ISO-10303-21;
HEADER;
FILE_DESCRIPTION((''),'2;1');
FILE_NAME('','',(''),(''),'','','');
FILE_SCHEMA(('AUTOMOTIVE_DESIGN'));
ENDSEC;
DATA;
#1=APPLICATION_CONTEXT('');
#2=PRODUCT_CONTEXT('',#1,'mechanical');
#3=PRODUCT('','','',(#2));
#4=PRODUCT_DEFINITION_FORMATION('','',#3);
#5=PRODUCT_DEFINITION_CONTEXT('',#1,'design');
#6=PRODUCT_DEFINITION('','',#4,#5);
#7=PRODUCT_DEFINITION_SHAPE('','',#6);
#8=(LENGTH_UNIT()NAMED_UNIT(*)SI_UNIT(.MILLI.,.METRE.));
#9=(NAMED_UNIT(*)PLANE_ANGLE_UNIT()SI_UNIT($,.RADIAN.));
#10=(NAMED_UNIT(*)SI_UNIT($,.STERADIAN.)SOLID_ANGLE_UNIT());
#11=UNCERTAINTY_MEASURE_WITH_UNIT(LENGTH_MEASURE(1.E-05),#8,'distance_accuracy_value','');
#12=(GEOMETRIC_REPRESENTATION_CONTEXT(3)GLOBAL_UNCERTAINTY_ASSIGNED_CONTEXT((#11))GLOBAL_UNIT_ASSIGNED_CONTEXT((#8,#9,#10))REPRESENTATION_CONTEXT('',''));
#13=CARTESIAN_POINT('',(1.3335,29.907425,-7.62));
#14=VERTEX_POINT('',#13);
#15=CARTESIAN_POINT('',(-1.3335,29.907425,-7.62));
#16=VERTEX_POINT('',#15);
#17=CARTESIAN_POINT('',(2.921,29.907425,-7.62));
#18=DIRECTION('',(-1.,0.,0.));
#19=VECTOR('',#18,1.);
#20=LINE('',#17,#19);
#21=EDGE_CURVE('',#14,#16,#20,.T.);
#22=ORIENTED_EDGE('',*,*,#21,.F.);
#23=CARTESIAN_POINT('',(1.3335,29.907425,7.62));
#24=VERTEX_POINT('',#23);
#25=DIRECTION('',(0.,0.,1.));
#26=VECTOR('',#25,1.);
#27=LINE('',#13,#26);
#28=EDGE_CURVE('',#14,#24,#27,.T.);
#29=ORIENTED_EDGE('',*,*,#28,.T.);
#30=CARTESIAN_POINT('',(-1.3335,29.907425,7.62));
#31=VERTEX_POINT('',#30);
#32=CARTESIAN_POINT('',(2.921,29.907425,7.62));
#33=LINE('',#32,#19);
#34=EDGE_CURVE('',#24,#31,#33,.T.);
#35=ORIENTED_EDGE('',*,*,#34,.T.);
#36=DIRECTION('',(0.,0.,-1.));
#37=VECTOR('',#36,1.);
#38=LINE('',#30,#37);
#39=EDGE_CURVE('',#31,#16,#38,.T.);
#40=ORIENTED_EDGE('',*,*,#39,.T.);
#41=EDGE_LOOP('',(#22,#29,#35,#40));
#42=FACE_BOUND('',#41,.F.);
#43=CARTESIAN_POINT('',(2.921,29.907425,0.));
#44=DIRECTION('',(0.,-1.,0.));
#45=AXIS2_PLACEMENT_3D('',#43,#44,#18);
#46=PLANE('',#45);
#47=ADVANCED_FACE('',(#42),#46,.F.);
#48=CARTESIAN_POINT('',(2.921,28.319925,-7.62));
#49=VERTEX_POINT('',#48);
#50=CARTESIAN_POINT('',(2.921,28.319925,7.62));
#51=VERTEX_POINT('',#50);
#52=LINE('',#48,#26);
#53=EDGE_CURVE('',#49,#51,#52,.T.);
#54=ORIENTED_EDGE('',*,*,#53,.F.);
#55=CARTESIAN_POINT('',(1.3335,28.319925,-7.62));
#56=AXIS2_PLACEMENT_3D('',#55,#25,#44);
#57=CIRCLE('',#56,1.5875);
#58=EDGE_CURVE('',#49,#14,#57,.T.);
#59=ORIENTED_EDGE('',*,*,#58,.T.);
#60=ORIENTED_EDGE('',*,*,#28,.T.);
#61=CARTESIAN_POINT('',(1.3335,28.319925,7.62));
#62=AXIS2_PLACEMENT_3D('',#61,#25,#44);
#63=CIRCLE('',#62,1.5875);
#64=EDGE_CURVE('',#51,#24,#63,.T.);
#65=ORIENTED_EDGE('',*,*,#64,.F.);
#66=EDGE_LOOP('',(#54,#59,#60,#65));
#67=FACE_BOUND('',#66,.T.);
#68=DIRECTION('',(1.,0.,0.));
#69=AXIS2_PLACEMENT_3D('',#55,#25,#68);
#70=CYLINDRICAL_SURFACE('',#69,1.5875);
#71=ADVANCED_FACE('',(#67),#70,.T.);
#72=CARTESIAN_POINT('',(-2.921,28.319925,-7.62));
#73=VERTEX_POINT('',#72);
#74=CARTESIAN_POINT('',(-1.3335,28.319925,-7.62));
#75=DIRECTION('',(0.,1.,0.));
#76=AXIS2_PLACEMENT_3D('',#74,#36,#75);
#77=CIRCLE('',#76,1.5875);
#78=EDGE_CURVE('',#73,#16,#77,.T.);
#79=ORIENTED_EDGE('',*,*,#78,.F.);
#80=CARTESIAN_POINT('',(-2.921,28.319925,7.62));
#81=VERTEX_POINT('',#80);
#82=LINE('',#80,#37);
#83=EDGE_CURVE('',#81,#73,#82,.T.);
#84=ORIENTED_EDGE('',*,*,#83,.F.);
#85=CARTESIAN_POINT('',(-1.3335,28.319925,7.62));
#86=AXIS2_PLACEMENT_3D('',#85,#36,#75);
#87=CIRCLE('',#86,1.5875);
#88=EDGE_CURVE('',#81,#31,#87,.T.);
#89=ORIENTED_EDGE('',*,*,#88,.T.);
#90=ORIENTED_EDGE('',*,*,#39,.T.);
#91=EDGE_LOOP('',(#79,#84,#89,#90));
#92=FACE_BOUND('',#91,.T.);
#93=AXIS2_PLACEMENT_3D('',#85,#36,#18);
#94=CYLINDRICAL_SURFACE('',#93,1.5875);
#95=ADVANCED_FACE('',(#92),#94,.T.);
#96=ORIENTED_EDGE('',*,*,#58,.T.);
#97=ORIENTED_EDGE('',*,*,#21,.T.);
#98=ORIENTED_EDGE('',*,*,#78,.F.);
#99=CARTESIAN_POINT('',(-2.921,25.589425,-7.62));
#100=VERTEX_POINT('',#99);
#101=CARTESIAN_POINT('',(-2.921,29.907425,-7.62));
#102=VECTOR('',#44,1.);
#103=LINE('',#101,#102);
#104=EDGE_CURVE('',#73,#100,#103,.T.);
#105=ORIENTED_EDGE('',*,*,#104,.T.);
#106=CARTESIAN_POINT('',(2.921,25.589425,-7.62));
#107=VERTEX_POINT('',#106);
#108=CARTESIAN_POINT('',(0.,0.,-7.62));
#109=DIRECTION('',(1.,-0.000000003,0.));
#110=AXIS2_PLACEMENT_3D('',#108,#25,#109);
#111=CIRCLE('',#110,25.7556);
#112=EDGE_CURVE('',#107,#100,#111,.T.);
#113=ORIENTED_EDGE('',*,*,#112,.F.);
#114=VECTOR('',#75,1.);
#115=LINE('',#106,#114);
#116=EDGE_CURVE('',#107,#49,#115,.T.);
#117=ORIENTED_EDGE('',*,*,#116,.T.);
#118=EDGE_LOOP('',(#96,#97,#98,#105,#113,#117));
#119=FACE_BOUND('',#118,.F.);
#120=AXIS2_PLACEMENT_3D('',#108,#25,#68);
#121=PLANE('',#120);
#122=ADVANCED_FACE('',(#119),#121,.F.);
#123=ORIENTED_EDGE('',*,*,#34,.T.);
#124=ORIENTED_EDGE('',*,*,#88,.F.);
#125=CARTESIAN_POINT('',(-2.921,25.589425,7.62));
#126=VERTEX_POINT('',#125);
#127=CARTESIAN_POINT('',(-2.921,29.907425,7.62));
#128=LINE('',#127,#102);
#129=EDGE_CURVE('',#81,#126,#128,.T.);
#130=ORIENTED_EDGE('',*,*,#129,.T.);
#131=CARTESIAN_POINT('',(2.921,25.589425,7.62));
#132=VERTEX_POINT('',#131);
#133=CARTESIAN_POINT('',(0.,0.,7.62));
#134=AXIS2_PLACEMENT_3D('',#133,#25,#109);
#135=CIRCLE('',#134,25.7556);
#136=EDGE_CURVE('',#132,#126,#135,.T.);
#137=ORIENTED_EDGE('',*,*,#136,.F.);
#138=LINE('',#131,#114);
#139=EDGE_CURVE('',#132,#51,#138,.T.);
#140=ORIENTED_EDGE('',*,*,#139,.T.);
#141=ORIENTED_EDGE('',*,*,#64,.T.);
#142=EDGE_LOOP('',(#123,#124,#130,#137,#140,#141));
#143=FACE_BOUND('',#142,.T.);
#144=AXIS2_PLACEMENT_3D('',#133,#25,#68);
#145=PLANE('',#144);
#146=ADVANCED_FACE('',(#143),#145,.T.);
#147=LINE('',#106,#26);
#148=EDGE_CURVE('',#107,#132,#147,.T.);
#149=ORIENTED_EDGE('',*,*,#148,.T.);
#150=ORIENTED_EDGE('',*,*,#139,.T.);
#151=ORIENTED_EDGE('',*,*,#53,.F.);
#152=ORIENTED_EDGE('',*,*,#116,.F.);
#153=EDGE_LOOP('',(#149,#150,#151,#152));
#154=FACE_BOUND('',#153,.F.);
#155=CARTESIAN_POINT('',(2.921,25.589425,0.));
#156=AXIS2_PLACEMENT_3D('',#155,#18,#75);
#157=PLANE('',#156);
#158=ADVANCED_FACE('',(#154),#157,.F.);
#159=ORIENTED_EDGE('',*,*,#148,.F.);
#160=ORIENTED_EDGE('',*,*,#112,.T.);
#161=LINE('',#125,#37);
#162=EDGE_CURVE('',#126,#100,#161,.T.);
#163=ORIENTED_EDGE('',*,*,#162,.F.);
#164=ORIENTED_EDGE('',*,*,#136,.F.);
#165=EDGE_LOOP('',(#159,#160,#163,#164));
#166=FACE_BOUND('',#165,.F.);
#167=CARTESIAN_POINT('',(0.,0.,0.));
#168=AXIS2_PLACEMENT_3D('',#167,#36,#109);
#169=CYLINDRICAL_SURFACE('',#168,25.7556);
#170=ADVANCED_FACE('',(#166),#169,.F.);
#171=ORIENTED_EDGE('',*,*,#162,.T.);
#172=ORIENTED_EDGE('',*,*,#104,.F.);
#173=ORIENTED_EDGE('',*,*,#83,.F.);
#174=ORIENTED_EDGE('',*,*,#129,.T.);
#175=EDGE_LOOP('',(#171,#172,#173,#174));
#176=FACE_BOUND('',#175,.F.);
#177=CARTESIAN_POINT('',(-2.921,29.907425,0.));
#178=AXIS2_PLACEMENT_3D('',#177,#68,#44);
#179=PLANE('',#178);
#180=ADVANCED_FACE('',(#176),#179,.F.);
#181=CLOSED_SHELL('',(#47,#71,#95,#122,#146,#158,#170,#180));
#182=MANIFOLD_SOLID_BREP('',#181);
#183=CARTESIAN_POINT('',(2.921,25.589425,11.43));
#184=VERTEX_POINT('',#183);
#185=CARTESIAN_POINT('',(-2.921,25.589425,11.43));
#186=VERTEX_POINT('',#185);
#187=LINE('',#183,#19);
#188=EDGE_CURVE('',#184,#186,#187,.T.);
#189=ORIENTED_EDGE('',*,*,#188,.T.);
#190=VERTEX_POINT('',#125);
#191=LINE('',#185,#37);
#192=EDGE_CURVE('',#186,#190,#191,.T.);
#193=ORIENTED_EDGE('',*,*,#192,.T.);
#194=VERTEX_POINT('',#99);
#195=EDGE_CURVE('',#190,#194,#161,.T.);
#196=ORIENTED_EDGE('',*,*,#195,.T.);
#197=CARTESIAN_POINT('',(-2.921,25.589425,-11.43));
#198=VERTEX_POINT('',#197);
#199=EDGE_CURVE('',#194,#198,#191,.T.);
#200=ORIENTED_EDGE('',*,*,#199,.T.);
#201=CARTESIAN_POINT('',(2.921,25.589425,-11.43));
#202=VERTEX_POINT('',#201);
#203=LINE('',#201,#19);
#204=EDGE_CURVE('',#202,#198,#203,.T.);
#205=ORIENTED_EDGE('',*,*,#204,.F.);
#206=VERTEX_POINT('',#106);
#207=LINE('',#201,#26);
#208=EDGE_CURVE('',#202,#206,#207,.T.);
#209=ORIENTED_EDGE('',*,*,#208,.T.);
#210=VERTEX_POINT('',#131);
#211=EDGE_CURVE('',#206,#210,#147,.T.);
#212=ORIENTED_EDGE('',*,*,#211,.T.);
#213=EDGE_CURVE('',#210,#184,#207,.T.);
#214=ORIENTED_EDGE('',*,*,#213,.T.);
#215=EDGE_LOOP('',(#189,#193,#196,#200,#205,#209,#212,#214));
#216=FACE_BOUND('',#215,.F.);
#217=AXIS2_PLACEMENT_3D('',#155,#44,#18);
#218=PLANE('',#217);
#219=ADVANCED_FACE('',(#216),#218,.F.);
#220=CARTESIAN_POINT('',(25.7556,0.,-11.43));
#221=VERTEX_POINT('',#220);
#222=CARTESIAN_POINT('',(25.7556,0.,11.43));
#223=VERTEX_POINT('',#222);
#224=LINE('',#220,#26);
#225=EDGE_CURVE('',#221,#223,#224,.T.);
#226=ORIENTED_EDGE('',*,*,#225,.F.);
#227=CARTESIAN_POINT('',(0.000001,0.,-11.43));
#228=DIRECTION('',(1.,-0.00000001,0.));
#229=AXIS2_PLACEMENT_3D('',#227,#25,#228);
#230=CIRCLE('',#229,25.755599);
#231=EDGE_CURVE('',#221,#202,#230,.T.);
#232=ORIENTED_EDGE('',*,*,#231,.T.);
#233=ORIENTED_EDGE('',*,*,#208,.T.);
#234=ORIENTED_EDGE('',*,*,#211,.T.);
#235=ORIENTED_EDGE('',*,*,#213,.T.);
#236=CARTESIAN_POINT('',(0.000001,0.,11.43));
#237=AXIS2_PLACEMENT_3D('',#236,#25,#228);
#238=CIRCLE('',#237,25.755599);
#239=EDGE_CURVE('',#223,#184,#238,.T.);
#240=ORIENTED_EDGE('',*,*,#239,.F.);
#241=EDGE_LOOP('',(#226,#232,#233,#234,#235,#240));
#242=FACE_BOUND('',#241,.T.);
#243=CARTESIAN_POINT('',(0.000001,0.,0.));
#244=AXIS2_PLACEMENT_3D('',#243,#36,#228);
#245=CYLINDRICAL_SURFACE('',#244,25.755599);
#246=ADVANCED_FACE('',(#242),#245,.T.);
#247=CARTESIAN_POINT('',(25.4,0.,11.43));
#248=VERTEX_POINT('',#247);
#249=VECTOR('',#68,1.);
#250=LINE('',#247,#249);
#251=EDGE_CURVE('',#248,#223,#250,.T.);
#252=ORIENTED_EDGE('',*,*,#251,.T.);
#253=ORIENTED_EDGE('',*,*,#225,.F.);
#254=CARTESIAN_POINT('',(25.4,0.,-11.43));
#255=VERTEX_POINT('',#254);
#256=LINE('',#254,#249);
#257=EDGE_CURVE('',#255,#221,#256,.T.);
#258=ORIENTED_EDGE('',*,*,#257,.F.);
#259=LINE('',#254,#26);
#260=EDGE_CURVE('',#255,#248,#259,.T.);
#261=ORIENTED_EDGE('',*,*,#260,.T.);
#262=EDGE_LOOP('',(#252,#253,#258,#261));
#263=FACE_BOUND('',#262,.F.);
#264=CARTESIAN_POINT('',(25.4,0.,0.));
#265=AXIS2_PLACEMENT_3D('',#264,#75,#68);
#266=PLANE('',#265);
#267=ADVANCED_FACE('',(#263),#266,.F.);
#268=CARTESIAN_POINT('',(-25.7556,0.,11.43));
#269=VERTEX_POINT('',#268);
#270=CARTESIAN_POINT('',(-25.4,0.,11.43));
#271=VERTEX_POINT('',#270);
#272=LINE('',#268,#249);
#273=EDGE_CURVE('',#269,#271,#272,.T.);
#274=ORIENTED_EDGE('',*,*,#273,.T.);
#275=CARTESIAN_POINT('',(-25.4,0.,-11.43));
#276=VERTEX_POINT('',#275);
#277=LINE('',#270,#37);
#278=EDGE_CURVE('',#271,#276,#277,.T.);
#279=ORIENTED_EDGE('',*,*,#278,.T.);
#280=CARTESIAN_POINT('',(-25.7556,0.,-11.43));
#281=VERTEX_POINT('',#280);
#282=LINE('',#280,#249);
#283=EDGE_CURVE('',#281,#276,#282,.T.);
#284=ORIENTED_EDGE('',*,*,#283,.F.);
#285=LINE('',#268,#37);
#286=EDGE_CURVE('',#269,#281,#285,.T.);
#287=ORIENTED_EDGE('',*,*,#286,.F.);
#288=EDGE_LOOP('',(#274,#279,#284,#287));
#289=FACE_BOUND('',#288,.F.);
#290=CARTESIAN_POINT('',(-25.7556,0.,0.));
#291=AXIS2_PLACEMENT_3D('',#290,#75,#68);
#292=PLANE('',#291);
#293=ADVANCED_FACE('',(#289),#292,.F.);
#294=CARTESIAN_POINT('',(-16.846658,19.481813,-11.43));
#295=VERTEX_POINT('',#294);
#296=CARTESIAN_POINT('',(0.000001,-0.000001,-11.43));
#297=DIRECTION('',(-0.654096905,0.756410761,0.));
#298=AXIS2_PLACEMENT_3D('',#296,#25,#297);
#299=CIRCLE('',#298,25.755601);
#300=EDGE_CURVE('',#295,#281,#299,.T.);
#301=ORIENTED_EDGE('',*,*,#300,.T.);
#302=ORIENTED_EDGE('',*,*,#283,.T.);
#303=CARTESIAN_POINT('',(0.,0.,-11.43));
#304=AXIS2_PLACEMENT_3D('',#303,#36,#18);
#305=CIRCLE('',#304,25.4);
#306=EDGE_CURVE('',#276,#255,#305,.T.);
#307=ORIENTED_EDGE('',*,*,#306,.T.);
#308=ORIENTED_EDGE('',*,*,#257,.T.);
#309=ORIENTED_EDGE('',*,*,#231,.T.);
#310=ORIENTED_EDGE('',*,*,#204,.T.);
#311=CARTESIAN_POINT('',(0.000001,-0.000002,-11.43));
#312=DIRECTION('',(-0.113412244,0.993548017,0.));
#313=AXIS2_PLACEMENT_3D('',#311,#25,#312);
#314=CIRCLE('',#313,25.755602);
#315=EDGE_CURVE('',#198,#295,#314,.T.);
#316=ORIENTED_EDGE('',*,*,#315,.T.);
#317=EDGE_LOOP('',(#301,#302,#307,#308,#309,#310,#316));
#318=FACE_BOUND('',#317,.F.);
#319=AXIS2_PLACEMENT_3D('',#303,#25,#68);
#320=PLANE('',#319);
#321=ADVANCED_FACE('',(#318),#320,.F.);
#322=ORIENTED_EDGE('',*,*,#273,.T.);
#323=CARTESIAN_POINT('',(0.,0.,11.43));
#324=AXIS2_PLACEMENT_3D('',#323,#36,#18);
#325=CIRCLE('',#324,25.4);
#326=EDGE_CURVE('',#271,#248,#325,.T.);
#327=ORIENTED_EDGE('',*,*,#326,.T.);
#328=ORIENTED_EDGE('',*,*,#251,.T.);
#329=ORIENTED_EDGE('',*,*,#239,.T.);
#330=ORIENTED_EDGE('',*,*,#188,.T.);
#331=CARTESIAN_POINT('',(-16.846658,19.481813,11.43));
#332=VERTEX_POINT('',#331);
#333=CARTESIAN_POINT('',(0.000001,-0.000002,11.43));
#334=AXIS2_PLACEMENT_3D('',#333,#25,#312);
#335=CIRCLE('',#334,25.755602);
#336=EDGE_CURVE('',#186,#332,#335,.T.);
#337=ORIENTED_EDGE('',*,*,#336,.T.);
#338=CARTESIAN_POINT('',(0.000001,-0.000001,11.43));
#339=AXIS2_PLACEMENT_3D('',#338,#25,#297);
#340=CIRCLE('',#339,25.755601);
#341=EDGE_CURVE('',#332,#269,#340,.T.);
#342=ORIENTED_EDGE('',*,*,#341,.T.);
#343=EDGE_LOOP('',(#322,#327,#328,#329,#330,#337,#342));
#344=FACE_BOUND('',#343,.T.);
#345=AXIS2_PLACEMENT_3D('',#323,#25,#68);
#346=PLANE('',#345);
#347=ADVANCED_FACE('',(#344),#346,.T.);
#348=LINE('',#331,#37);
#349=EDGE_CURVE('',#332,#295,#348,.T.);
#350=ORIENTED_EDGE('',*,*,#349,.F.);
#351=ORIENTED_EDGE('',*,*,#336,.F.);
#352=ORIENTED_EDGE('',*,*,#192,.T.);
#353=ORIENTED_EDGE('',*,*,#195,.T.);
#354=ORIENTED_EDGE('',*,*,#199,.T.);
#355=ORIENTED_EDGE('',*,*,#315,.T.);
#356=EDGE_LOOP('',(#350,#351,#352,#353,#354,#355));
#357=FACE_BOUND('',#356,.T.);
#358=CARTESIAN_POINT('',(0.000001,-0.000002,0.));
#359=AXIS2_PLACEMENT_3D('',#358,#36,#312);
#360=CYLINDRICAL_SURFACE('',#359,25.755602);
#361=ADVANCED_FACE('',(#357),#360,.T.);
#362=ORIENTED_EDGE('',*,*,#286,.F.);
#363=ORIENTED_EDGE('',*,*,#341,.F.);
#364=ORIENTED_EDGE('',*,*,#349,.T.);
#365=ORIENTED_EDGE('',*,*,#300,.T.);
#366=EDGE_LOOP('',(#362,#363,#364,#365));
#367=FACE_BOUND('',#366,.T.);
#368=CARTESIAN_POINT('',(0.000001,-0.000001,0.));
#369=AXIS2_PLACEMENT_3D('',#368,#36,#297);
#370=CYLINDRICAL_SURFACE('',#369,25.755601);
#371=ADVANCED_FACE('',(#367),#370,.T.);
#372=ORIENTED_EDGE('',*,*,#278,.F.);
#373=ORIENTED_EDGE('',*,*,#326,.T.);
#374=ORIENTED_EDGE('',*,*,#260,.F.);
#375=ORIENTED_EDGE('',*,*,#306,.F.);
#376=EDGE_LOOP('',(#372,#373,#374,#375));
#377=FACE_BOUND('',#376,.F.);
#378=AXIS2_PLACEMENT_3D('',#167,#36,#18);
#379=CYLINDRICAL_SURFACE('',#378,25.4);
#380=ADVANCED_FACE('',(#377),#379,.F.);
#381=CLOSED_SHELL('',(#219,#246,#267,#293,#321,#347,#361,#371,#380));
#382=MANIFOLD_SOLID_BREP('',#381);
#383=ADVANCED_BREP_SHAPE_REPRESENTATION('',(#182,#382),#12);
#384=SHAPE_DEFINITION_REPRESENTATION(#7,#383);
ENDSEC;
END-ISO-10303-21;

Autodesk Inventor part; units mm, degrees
ref_plane "YZ Plane" through (0, 0, 0) normal (1, 0, 0) x (0, 1, 0)
ref_plane "XZ Plane" through (0, 0, 0) normal (0, 1, 0) x (-1, 0, 0)
ref_plane "XY Plane" through (0, 0, 0) normal (0, 0, 1) x (1, 0, 0)
sketch "Sketch1" plane through (0, 0, 0) normal (0, 0, 1) x (1, 0, 0)
  arc A0 (25.7556, 0) -> (-16.846658, 19.481813) centre (0, 0) ccw
  arc A1 (-16.846658, 19.481813) -> (-25.7556, 0) centre (0, 0) ccw
  arc A2 (25.4, 0) -> (-25.4, 0) centre (0, 0) ccw
  line L0 (-25.4, 0) -> (-25.7556, 0)
  line L1 (25.4, 0) -> (25.7556, 0)
  line L2 (-2.921, 25.589425) -> (2.921, 25.589425)
  line L3 (2.921, 25.589425) -> (2.921, 29.907425)
  line L4 (2.921, 29.907425) -> (-2.921, 29.907425)
  line L5 (-2.921, 29.907425) -> (-2.921, 25.589425)
  point P0 (25.5778, 0)
  point P1 (-25.5778, 0)
  dimension "d16" = 25.4
  dimension "d18" = 5.842
  dimension "d19" = 2.921
  dimension "d20" = 4.318
  dimension "d23" = 0.3556
  dimension "d24" = 25.7556
sketch "Sketch1 outline for Extrusion1" plane through (0, 0, 0) normal (0, 0, 1) x (1, 0, 0)
  line L0 (25.4, 0) -> (25.7556, 0)
  arc A0 (-25.4, 0) -> (25.4, 0) centre (0, 0) cw
  line L1 (-25.7556, 0) -> (-25.4, 0)
  arc A1 (-16.846658, 19.481813) -> (-25.7556, 0) centre (0, 0) ccw
  arc A2 (-2.921, 25.589425) -> (-16.846658, 19.481813) centre (0, 0) ccw
  line L2 (2.921, 25.589425) -> (-2.921, 25.589425)
  arc A3 (25.7556, 0) -> (2.921, 25.589425) centre (0, 0) ccw
extrude "Extrusion1" add sketch "Sketch1 outline for Extrusion1" along normal mid plane 22.86
extrude "Extrusion2" add sketch "Sketch1" along normal mid plane 15.24 contours A0 L5 L4 L3
fillet "Fillet1" radius 1.5875 2 edges at (2.921, 29.9074, 0) (-2.921, 29.9074, 0)
equation "\"d19\" = 0.5 * d18"
equation "\"d24\" = d16 + d23"
properties part number "Drill Motor Shifter Cover"
